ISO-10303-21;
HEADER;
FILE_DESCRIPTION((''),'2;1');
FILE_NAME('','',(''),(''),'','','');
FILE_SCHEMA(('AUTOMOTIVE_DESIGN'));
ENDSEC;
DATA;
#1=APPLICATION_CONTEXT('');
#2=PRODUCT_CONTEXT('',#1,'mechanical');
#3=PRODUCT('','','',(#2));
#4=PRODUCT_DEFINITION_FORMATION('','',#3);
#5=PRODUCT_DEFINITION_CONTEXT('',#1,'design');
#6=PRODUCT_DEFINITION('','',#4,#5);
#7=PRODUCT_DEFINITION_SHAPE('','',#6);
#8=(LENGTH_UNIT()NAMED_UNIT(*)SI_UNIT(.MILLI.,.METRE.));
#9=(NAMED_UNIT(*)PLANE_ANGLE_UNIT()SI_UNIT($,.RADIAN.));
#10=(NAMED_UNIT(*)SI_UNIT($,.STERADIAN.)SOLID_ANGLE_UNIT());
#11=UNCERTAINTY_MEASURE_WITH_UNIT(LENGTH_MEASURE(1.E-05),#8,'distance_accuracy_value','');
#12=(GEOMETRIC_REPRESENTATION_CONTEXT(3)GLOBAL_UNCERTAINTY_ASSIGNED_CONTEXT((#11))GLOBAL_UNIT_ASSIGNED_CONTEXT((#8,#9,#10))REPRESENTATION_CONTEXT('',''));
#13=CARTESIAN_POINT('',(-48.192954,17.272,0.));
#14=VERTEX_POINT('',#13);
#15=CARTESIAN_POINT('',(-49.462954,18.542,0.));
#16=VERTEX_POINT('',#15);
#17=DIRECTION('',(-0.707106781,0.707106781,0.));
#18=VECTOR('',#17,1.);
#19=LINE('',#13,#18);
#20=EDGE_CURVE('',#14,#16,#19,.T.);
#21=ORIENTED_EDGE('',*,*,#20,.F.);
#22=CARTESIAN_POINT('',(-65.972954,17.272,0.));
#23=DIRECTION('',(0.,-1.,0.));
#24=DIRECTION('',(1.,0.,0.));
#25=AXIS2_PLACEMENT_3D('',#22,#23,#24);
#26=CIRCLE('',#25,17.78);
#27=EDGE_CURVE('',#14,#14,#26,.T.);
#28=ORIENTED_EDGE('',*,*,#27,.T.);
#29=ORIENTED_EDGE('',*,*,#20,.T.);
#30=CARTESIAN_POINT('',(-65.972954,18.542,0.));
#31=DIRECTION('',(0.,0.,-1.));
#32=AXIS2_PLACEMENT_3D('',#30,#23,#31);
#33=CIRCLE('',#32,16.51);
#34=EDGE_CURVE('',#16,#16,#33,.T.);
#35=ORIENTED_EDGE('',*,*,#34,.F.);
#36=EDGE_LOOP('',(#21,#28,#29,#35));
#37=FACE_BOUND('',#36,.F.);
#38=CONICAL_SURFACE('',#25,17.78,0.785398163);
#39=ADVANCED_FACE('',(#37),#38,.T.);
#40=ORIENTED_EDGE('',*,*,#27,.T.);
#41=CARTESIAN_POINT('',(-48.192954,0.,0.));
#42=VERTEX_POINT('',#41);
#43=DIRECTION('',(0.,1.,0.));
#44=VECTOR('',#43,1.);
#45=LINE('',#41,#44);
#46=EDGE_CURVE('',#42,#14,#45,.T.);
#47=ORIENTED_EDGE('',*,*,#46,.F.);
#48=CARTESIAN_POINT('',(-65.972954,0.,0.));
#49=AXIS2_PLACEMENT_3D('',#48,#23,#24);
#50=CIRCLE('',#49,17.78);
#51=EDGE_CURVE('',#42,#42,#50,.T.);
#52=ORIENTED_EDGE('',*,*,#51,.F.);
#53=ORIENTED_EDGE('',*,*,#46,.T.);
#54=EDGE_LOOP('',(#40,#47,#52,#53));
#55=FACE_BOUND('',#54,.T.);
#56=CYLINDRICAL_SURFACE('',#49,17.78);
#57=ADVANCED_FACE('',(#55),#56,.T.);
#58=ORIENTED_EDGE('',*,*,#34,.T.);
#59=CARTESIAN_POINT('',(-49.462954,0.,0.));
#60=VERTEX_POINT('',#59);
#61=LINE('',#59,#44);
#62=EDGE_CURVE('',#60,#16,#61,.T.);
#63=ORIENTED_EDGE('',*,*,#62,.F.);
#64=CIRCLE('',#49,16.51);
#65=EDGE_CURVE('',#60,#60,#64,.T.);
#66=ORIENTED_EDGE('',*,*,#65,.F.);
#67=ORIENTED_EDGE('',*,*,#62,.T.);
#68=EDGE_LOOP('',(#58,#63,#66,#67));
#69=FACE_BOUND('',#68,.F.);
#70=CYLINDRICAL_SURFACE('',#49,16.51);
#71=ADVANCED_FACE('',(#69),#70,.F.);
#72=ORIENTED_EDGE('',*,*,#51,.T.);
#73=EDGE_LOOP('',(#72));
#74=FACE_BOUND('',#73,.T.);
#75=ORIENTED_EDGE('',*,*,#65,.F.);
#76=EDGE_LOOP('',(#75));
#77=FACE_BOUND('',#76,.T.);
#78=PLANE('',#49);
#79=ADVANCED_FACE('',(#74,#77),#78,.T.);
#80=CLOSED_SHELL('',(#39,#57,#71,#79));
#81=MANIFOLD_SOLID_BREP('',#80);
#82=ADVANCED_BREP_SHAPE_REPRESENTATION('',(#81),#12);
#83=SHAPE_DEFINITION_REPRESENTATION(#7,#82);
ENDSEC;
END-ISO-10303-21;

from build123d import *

# Parameters (mm, degrees)
F0_R     = 17.78
F0_R_2   = 16.51
F1_DEPTH = 19.812


# Not quite as in the source:
# - a fillet or chamfer that OpenCascade refuses, or shapes differently, is made with other operations: its cross-section is extruded or revolved along the edge and cut away or added


with BuildPart() as f1:
    # F0 (on Front) → F1 (new body)
    with BuildSketch(Plane.XZ):
        with Locations((-65.9729540348, 0)):
            Circle(F0_R)
        with Locations((-65.9729540348, 0)):
            Circle(F0_R_2, mode=Mode.SUBTRACT)
    extrude(amount=-F1_DEPTH)

    # F2: chamfer of 2.54 on 1 edges, made by hand

    # F2_s1 → F2_t2 (revolve, cut)
    with BuildSketch(Plane.XY):
        Polygon((-48.1929540348, 17.272), (-50.7329540348, 19.812), (-48.1929540348, 19.812), align=None)
    revolve(axis=Axis((-65.9729540348, 19.812, 0), (0, -1, 0)), mode=Mode.SUBTRACT)


solid = f1.part
